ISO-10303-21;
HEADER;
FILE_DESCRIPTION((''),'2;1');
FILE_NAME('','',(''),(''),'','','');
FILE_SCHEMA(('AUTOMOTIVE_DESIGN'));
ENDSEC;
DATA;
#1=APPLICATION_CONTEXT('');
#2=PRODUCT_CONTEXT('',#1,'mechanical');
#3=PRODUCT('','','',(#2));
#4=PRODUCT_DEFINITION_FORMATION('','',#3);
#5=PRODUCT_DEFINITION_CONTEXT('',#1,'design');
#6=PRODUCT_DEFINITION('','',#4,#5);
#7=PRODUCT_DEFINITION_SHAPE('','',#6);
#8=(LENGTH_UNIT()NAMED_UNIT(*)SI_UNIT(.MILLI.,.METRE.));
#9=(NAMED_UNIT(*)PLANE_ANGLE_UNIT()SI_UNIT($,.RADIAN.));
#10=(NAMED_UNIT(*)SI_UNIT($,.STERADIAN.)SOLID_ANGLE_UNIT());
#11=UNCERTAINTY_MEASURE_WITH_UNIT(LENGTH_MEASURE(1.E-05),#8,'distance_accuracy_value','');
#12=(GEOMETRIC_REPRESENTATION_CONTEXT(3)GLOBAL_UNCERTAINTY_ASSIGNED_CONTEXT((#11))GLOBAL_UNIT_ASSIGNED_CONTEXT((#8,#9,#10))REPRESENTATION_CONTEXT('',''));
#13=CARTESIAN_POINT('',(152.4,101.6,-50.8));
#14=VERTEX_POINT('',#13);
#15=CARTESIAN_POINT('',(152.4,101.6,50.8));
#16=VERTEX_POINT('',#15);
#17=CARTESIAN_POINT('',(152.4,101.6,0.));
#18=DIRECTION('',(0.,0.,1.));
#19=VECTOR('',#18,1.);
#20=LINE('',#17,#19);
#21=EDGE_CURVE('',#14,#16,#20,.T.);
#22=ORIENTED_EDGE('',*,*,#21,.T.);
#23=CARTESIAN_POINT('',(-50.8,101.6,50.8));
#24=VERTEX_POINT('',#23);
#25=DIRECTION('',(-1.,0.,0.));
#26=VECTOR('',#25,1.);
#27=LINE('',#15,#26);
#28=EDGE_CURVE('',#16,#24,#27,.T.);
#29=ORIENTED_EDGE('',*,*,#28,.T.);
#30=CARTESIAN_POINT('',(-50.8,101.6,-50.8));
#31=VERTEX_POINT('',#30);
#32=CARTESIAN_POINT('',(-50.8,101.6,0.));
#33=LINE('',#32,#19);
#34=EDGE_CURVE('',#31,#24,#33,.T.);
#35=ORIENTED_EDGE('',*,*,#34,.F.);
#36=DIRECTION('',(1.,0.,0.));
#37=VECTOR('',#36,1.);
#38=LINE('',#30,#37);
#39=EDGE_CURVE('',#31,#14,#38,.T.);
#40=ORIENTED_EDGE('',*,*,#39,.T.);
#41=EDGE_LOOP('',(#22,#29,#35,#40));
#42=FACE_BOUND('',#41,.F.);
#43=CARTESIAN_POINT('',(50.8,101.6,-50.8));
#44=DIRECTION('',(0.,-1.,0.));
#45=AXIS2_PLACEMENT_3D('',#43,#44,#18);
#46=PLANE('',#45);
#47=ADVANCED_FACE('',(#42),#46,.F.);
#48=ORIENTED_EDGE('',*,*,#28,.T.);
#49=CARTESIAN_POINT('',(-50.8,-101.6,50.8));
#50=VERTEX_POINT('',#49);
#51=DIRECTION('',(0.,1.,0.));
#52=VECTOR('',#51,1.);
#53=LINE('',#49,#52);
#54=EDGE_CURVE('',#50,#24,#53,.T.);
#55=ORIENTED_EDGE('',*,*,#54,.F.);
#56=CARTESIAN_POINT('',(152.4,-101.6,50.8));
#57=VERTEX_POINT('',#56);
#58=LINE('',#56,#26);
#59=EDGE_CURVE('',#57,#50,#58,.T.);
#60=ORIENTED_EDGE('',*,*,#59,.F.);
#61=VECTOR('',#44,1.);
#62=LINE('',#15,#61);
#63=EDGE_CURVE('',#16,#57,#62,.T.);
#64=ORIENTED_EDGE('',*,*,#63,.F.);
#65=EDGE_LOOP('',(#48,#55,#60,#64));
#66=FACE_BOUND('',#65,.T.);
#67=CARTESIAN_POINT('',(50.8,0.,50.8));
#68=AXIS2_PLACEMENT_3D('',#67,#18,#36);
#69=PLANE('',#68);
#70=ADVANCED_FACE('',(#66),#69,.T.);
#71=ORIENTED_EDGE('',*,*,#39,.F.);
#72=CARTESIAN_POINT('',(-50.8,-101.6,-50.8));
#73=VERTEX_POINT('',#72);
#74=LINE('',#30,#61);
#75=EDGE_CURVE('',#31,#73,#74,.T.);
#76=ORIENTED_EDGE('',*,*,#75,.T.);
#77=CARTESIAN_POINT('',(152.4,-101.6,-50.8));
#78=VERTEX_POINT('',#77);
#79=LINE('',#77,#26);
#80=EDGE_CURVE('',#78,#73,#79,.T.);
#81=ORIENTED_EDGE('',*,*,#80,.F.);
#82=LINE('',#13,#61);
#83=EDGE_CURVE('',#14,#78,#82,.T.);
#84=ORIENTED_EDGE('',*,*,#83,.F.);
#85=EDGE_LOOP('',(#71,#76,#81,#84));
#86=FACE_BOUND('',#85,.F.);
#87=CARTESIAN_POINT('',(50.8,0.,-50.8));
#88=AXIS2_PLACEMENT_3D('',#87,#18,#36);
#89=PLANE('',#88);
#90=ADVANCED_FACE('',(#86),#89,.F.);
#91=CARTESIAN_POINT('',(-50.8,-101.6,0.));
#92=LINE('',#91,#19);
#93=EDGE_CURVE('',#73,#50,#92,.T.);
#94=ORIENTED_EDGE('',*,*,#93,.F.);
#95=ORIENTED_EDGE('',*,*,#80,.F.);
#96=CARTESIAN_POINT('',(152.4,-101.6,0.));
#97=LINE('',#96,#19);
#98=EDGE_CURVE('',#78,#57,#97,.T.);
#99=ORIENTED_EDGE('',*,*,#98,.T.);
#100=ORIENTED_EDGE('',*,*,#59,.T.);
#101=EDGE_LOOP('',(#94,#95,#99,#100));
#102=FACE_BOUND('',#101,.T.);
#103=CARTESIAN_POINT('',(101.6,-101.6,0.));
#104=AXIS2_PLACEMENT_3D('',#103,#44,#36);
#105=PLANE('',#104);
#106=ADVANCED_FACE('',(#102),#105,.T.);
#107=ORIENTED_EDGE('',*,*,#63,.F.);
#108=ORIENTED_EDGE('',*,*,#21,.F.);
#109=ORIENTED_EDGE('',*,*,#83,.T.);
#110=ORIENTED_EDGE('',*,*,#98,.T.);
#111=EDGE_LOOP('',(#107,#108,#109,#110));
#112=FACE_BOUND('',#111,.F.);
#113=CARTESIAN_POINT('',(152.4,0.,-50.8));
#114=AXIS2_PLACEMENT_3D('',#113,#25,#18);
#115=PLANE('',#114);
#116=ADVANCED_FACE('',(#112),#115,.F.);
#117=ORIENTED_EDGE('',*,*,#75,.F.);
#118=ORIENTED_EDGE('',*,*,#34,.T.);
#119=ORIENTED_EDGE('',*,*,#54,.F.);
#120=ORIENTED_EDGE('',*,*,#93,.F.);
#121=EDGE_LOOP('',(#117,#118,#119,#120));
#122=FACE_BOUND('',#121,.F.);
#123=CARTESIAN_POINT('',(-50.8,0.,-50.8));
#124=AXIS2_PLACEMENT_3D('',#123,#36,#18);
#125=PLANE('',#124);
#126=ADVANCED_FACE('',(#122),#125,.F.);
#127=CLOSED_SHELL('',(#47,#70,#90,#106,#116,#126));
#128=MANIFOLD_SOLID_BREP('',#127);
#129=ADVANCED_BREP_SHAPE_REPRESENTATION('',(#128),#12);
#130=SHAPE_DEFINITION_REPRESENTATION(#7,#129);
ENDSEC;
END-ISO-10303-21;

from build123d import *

# Parameters (mm, degrees)
F1_W     = 101.6
F1_H     = 101.6
F2_DEPTH = 101.6
F3_W     = 101.6
F3_H     = 101.6
F4_DEPTH = 101.6
F5_W     = 101.6
F5_H     = 101.6
F6_DEPTH = 101.6


# Not quite as in the source:
# - a variable given as a bare number and used for a length is read in inches; the dataset says mm whatever the document's units were


with BuildPart() as f2:
    # F1 (on Front) → F2 (new body, symmetric)
    with BuildSketch(Plane.XZ):
        Rectangle(F1_W, F1_H)
    extrude(amount=F2_DEPTH, both=True)

    # F3 (on face) → F4 (join)
    with BuildSketch(Plane.YZ.offset(50.8)):
        with Locations((50.8, 0)):
            Rectangle(F3_W, F3_H)
    extrude(amount=F4_DEPTH)

    # F5 (on face) → F6 (join)
    with BuildSketch(Plane.XZ):
        with Locations((101.6, 0)):
            Rectangle(F5_W, F5_H)
    extrude(amount=F6_DEPTH)


solid = f2.part
